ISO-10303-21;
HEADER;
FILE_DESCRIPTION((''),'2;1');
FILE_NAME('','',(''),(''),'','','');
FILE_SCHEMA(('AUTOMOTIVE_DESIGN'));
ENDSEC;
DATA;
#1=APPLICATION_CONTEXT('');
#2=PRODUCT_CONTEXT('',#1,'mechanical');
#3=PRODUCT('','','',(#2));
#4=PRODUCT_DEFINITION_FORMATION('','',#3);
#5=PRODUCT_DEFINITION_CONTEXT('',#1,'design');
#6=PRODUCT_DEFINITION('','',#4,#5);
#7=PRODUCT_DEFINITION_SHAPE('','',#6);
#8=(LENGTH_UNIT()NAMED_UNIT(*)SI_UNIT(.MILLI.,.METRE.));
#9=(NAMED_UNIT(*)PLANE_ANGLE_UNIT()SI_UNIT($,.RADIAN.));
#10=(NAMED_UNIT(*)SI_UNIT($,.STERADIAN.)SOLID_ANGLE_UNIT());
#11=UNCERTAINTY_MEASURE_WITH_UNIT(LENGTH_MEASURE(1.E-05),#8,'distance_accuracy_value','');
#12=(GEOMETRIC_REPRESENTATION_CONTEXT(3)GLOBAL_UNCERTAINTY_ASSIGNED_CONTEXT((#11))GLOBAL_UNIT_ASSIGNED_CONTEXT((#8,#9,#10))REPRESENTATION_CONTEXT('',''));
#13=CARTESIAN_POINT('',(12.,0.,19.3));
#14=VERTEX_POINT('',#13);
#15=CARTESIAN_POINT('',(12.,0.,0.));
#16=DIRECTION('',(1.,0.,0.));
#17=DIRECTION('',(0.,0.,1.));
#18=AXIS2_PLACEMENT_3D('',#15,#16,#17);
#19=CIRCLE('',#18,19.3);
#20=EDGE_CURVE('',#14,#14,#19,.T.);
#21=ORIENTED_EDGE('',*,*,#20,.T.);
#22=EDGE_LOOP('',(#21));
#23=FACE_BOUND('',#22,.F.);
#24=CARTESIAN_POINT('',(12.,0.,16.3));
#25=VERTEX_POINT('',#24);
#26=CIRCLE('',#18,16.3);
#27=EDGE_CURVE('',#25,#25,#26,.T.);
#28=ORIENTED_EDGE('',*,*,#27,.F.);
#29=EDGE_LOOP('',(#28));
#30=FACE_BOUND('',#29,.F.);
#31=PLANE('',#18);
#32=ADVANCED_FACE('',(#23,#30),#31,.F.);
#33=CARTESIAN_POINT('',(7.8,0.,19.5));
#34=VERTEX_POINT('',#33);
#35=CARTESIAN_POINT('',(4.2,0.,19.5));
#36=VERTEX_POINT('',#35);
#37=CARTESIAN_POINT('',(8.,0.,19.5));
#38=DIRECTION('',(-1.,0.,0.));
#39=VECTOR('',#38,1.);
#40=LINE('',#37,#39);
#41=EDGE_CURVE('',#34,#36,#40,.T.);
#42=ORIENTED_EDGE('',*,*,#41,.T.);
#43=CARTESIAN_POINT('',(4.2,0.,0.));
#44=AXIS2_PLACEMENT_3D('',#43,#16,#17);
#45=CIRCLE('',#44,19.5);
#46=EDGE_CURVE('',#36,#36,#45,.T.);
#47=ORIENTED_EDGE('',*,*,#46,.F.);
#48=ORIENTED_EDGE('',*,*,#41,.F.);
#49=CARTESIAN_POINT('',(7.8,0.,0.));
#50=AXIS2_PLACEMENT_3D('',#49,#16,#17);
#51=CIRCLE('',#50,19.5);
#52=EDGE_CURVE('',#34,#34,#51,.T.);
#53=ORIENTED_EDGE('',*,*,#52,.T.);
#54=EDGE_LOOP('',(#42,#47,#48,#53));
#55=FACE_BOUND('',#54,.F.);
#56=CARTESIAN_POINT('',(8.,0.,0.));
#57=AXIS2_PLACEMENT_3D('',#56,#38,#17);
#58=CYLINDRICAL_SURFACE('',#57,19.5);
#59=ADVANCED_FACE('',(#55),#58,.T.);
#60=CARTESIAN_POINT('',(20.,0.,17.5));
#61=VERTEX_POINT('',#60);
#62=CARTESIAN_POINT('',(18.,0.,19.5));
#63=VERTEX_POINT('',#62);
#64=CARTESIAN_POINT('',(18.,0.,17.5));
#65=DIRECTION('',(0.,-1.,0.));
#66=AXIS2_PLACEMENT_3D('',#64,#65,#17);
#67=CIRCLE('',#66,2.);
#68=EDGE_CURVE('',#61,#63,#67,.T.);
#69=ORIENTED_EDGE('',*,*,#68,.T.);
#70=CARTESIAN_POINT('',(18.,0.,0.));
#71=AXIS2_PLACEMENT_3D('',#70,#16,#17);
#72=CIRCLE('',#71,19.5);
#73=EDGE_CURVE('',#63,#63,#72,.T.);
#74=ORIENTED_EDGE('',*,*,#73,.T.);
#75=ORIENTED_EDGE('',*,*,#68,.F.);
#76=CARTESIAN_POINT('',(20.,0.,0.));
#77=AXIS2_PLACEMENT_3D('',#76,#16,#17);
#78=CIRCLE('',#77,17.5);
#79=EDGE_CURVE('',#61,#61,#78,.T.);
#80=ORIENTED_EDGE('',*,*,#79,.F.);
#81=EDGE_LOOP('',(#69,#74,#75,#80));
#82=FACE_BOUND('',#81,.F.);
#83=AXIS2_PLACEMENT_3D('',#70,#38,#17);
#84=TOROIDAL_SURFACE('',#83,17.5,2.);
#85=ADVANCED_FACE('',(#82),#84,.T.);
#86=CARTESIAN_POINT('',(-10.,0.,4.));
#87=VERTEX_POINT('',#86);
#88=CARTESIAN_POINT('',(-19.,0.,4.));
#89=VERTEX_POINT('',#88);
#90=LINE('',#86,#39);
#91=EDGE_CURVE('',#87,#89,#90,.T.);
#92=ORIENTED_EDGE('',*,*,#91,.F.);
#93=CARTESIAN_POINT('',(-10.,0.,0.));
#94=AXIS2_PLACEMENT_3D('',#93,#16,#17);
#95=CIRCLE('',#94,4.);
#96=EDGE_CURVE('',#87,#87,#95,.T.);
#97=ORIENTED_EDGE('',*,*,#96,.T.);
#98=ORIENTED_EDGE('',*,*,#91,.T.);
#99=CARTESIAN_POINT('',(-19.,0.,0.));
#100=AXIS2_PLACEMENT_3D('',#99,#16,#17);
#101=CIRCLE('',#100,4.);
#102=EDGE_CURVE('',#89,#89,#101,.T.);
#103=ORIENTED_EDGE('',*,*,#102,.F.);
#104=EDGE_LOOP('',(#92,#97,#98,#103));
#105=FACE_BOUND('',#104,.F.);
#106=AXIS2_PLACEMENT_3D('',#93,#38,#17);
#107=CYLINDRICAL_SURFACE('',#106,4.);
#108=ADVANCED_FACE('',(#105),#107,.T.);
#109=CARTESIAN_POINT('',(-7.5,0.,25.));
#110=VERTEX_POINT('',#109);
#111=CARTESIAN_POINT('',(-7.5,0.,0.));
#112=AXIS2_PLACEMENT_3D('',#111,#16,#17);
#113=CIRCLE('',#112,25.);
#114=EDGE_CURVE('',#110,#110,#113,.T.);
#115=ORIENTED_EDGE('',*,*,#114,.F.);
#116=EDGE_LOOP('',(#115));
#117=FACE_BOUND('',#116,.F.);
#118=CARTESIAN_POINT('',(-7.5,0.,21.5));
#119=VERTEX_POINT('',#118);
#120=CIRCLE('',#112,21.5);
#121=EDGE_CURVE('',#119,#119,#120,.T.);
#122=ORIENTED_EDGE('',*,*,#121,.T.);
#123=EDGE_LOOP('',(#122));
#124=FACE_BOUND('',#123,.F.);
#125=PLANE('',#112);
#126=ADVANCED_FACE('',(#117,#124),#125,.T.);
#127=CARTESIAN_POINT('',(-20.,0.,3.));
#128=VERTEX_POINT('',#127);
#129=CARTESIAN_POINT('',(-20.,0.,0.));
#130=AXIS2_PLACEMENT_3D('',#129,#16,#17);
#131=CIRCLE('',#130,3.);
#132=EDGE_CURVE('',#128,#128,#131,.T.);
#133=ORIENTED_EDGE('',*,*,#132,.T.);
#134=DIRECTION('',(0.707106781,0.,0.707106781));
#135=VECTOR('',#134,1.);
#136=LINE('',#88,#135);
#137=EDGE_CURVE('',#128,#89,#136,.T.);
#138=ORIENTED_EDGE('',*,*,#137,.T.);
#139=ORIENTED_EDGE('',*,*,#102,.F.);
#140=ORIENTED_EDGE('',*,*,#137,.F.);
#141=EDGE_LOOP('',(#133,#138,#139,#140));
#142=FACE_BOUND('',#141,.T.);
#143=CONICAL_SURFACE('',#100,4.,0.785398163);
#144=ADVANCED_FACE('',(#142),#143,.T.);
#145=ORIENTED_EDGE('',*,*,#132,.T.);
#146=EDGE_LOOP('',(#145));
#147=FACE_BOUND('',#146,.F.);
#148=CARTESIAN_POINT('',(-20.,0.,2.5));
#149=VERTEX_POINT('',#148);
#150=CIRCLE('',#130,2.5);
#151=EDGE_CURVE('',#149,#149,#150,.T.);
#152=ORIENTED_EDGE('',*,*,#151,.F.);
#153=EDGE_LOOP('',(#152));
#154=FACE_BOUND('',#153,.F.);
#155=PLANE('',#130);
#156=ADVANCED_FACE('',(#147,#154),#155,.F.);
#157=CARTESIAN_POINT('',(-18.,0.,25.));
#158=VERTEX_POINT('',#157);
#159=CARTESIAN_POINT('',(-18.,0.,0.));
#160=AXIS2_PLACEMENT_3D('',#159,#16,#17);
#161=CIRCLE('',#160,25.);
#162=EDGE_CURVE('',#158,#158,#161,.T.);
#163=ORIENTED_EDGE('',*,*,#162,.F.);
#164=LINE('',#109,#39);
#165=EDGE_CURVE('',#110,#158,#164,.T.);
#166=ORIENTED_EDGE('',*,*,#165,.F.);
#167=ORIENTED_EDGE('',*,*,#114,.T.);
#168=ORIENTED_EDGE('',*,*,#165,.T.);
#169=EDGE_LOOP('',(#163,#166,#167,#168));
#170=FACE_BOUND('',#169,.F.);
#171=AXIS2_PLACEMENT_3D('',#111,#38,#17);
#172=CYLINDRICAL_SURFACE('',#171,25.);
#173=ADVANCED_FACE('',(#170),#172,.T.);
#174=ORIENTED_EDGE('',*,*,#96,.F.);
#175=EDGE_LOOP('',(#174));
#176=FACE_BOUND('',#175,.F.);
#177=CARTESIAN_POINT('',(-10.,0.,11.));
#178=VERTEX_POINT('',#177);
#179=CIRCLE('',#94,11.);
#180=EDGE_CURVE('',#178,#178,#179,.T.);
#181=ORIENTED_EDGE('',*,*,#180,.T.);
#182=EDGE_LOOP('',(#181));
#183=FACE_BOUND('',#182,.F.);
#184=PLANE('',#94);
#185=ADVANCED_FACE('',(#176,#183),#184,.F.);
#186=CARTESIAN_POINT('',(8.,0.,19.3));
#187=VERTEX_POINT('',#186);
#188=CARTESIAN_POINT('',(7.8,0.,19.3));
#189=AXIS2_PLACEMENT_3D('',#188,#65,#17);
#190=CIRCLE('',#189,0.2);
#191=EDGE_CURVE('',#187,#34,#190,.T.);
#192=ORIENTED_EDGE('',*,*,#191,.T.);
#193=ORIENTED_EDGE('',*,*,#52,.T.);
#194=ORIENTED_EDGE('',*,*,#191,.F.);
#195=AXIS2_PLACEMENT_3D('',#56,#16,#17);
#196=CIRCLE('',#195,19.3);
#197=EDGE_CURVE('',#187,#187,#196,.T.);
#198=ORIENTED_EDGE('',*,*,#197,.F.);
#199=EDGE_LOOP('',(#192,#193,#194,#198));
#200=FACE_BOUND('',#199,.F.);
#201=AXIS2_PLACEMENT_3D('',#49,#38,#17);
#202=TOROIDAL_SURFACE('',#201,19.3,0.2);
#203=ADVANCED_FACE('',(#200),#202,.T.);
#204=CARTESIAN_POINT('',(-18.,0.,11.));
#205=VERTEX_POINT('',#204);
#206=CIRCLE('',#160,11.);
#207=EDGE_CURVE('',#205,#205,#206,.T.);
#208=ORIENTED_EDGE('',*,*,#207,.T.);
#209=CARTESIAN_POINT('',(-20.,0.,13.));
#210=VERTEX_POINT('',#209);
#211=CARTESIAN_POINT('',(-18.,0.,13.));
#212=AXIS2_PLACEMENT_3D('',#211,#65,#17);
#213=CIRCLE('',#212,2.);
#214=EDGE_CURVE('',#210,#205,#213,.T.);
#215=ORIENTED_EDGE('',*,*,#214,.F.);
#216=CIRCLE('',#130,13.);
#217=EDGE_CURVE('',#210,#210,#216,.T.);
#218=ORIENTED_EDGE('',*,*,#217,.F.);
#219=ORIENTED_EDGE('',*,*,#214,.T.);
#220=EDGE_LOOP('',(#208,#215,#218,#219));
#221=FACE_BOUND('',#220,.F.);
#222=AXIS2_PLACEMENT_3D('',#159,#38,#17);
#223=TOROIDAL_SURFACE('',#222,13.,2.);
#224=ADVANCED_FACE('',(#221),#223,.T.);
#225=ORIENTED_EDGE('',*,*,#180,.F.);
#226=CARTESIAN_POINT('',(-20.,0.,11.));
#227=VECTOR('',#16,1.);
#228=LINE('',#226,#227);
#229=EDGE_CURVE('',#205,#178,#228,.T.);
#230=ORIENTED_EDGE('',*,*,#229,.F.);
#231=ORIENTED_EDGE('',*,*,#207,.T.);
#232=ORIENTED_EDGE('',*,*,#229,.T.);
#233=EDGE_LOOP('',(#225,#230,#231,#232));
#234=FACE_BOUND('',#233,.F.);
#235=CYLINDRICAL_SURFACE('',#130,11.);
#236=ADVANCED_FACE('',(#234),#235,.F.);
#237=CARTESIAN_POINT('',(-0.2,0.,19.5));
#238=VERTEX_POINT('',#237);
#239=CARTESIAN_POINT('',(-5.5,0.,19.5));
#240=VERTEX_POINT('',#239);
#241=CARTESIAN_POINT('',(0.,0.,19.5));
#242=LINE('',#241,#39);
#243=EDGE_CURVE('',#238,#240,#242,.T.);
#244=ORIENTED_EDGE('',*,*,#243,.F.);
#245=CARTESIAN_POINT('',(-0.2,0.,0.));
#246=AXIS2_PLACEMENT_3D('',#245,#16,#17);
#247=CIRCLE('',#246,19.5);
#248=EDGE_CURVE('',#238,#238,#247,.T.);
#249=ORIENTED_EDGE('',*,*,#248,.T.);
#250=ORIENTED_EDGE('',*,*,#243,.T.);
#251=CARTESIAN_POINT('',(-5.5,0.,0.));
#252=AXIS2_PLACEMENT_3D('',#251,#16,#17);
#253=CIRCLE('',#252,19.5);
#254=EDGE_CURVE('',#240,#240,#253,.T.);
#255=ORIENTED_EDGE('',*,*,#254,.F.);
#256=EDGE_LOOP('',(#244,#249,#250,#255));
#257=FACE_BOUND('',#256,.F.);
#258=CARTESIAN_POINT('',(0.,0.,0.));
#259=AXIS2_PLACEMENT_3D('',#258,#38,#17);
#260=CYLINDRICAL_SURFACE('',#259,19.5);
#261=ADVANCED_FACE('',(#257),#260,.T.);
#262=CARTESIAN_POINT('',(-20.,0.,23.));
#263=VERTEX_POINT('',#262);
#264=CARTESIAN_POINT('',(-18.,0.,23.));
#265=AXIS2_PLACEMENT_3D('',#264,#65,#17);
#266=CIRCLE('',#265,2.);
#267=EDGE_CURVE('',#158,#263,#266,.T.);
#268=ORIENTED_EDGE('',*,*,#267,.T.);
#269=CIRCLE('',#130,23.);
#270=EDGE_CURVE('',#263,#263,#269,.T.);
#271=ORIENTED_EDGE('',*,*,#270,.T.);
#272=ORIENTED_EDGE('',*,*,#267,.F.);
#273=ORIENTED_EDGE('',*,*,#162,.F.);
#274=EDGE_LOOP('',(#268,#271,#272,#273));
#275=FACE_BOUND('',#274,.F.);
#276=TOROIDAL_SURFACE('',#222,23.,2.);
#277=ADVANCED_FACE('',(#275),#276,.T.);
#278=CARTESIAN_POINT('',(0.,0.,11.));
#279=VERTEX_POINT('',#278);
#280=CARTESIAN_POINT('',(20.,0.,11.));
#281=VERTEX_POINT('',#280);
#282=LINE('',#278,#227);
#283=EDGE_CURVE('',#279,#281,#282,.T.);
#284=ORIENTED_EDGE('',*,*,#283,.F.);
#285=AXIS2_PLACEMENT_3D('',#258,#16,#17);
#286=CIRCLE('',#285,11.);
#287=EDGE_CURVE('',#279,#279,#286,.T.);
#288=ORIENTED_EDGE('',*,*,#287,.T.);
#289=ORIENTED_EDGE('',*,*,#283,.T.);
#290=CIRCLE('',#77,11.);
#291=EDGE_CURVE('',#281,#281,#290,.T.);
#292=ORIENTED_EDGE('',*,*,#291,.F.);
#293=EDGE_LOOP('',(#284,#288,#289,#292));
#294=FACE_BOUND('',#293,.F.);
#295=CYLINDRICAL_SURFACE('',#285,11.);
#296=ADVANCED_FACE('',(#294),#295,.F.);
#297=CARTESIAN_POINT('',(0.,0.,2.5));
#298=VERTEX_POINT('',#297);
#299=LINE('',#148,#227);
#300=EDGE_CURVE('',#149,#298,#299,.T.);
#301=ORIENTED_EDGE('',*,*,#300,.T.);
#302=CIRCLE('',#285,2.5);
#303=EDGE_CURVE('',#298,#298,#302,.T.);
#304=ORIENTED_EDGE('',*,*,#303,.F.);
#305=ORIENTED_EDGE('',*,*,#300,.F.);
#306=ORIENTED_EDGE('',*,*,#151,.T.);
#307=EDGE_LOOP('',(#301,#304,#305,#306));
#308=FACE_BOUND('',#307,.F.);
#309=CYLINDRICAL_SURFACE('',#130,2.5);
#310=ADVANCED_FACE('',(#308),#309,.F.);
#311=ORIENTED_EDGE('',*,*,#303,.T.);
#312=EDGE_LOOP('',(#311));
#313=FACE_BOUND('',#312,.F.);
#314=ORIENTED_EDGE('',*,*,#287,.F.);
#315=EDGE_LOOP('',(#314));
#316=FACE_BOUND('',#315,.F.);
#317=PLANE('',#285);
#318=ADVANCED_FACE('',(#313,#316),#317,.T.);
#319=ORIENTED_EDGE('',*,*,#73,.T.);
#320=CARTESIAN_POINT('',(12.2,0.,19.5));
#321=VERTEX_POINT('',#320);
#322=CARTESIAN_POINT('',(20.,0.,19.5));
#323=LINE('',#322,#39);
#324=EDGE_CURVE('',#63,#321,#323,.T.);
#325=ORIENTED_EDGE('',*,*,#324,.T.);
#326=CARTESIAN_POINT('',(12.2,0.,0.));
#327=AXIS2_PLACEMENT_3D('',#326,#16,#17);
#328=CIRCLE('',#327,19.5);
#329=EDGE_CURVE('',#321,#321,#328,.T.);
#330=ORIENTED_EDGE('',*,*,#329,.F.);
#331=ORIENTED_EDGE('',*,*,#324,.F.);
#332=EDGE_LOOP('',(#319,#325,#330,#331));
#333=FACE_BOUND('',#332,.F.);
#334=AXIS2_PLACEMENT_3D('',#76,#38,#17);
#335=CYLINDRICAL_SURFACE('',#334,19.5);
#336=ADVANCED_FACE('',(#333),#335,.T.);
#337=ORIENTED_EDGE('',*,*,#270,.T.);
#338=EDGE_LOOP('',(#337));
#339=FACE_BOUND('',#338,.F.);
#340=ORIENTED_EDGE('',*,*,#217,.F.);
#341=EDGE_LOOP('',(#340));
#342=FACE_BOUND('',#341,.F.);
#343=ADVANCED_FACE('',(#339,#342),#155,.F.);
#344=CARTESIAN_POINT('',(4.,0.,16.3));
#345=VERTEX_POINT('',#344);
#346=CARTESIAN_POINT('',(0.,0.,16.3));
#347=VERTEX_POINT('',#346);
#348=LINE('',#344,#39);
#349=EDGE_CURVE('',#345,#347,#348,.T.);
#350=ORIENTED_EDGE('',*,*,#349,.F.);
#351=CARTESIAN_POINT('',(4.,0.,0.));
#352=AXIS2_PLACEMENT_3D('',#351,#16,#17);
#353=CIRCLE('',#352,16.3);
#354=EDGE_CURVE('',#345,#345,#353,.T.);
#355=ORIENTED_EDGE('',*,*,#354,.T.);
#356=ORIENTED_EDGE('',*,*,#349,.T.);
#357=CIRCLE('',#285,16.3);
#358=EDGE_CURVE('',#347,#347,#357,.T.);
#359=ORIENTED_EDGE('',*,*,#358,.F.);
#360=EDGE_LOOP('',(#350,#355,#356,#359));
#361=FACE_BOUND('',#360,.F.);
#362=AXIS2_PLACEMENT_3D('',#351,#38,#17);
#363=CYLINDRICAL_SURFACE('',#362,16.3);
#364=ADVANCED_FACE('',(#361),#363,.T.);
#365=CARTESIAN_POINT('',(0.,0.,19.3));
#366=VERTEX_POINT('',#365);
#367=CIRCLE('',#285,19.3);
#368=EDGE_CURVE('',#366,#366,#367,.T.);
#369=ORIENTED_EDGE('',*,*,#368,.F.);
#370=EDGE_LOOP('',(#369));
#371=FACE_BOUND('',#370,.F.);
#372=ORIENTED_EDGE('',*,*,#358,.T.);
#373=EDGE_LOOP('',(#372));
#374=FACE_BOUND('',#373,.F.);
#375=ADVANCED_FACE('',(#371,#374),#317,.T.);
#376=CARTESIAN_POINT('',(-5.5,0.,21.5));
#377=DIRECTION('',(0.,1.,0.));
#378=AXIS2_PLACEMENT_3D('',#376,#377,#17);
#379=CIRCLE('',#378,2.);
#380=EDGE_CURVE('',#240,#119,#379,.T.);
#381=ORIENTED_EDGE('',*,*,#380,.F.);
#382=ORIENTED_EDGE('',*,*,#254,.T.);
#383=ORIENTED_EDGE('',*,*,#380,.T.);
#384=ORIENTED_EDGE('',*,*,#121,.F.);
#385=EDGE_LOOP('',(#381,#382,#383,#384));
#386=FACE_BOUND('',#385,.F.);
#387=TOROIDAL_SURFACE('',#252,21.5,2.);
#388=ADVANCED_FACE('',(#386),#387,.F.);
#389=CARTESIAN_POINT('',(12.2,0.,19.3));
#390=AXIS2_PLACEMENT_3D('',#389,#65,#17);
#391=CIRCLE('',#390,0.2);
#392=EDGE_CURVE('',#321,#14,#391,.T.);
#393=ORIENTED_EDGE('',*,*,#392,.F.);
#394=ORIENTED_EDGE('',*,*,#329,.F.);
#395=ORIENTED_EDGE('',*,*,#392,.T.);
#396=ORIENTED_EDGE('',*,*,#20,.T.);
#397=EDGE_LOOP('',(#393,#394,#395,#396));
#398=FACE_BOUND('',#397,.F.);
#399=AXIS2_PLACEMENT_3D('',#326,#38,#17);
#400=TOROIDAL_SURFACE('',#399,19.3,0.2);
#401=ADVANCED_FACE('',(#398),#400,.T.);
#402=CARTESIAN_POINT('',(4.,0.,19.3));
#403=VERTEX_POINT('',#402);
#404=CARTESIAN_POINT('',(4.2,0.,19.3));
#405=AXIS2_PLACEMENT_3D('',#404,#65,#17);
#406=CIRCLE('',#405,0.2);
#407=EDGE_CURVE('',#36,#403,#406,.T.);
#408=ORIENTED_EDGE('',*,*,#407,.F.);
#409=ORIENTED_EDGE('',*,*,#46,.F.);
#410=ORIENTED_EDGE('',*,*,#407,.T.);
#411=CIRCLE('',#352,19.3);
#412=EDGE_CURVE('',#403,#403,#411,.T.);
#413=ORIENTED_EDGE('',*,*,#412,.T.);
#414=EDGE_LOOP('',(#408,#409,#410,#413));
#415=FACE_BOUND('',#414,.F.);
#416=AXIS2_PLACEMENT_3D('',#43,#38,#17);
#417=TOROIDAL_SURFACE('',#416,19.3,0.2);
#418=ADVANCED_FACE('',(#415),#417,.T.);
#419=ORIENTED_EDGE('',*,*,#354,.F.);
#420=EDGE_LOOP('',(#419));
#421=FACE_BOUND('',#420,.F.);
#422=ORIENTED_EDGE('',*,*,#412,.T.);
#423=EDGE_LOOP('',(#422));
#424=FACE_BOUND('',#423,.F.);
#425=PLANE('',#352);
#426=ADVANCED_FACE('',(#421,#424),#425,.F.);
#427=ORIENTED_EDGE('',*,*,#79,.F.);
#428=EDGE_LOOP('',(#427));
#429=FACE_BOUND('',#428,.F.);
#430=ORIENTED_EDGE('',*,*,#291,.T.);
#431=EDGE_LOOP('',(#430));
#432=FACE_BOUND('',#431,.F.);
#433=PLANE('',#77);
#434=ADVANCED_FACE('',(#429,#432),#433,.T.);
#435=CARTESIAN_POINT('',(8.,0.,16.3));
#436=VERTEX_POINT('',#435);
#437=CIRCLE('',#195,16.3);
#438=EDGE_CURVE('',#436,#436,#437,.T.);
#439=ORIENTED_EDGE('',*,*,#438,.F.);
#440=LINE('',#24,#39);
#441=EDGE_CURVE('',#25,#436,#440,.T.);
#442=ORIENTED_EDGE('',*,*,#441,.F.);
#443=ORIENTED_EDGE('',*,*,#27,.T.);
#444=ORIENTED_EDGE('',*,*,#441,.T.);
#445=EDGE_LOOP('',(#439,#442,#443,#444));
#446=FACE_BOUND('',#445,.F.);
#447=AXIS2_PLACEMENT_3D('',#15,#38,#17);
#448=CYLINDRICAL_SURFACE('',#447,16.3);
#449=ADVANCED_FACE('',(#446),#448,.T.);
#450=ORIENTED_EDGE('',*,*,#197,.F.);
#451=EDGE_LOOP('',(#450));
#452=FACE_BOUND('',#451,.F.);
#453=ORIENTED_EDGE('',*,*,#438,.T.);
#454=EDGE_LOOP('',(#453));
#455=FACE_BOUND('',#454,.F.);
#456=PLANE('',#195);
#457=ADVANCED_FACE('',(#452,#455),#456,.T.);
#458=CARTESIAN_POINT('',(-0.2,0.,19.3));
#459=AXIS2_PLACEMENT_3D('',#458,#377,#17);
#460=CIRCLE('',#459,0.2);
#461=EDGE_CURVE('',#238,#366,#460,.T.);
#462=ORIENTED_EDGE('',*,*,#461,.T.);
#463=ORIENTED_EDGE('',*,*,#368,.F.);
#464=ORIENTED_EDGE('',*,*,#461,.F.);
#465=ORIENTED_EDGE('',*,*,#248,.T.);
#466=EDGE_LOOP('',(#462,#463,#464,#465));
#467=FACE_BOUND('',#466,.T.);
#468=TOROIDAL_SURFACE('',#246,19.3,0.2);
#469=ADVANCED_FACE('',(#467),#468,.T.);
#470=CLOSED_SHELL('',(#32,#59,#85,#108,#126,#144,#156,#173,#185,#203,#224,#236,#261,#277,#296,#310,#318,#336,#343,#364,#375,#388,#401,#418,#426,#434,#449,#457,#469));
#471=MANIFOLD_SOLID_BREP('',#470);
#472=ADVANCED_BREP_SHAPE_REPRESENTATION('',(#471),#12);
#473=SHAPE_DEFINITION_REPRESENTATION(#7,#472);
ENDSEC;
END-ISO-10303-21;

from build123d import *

# Parameters (mm, degrees)
F2_R    = 2
F3_SIZE = 1
F4_R    = 0.2


with BuildPart() as f1:
    # F0 (on Front) → F1 (revolve)
    with BuildSketch(Plane.XZ):
        Polygon((-20, 4), (-20, 2.5), (0, 2.5), (0, 11), (20, 11), (20, 19.5), (12, 19.5), (12, 16.3), (8, 16.3), (8, 19.5), (4, 19.5), (4, 16.3), (2.1880425047, 16.3), (0, 16.3), (0, 19.5), (-7.5, 19.5), (-7.5, 25), (-20, 25), (-20, 11), (-10, 11), (-10, 4), align=None)
    revolve(axis=Axis((-1.4406982809, 0, 0), (1, 0, 0)))

    # F2
    f2_edges = [f1.edges().sort_by_distance(p)[0] for p in [
        (-20, 0, -25),
        (-20, 0, -11),
        (20, 0, -19.5),
        (-7.5, 0, -19.5),
    ]]
    fillet(f2_edges, radius=F2_R)

    # F3
    f3_edges = [f1.edges().sort_by_distance(p)[0] for p in [
        (-20, 0, -4),
    ]]
    chamfer(f3_edges, length=F3_SIZE)

    # F4
    f4_edges = [f1.edges().sort_by_distance(p)[0] for p in [
        (0, 0, -19.5),
        (4, 0, -19.5),
        (8, 0, -19.5),
        (12, 0, -19.5),
    ]]
    fillet(f4_edges, radius=F4_R)


solid = f1.part
